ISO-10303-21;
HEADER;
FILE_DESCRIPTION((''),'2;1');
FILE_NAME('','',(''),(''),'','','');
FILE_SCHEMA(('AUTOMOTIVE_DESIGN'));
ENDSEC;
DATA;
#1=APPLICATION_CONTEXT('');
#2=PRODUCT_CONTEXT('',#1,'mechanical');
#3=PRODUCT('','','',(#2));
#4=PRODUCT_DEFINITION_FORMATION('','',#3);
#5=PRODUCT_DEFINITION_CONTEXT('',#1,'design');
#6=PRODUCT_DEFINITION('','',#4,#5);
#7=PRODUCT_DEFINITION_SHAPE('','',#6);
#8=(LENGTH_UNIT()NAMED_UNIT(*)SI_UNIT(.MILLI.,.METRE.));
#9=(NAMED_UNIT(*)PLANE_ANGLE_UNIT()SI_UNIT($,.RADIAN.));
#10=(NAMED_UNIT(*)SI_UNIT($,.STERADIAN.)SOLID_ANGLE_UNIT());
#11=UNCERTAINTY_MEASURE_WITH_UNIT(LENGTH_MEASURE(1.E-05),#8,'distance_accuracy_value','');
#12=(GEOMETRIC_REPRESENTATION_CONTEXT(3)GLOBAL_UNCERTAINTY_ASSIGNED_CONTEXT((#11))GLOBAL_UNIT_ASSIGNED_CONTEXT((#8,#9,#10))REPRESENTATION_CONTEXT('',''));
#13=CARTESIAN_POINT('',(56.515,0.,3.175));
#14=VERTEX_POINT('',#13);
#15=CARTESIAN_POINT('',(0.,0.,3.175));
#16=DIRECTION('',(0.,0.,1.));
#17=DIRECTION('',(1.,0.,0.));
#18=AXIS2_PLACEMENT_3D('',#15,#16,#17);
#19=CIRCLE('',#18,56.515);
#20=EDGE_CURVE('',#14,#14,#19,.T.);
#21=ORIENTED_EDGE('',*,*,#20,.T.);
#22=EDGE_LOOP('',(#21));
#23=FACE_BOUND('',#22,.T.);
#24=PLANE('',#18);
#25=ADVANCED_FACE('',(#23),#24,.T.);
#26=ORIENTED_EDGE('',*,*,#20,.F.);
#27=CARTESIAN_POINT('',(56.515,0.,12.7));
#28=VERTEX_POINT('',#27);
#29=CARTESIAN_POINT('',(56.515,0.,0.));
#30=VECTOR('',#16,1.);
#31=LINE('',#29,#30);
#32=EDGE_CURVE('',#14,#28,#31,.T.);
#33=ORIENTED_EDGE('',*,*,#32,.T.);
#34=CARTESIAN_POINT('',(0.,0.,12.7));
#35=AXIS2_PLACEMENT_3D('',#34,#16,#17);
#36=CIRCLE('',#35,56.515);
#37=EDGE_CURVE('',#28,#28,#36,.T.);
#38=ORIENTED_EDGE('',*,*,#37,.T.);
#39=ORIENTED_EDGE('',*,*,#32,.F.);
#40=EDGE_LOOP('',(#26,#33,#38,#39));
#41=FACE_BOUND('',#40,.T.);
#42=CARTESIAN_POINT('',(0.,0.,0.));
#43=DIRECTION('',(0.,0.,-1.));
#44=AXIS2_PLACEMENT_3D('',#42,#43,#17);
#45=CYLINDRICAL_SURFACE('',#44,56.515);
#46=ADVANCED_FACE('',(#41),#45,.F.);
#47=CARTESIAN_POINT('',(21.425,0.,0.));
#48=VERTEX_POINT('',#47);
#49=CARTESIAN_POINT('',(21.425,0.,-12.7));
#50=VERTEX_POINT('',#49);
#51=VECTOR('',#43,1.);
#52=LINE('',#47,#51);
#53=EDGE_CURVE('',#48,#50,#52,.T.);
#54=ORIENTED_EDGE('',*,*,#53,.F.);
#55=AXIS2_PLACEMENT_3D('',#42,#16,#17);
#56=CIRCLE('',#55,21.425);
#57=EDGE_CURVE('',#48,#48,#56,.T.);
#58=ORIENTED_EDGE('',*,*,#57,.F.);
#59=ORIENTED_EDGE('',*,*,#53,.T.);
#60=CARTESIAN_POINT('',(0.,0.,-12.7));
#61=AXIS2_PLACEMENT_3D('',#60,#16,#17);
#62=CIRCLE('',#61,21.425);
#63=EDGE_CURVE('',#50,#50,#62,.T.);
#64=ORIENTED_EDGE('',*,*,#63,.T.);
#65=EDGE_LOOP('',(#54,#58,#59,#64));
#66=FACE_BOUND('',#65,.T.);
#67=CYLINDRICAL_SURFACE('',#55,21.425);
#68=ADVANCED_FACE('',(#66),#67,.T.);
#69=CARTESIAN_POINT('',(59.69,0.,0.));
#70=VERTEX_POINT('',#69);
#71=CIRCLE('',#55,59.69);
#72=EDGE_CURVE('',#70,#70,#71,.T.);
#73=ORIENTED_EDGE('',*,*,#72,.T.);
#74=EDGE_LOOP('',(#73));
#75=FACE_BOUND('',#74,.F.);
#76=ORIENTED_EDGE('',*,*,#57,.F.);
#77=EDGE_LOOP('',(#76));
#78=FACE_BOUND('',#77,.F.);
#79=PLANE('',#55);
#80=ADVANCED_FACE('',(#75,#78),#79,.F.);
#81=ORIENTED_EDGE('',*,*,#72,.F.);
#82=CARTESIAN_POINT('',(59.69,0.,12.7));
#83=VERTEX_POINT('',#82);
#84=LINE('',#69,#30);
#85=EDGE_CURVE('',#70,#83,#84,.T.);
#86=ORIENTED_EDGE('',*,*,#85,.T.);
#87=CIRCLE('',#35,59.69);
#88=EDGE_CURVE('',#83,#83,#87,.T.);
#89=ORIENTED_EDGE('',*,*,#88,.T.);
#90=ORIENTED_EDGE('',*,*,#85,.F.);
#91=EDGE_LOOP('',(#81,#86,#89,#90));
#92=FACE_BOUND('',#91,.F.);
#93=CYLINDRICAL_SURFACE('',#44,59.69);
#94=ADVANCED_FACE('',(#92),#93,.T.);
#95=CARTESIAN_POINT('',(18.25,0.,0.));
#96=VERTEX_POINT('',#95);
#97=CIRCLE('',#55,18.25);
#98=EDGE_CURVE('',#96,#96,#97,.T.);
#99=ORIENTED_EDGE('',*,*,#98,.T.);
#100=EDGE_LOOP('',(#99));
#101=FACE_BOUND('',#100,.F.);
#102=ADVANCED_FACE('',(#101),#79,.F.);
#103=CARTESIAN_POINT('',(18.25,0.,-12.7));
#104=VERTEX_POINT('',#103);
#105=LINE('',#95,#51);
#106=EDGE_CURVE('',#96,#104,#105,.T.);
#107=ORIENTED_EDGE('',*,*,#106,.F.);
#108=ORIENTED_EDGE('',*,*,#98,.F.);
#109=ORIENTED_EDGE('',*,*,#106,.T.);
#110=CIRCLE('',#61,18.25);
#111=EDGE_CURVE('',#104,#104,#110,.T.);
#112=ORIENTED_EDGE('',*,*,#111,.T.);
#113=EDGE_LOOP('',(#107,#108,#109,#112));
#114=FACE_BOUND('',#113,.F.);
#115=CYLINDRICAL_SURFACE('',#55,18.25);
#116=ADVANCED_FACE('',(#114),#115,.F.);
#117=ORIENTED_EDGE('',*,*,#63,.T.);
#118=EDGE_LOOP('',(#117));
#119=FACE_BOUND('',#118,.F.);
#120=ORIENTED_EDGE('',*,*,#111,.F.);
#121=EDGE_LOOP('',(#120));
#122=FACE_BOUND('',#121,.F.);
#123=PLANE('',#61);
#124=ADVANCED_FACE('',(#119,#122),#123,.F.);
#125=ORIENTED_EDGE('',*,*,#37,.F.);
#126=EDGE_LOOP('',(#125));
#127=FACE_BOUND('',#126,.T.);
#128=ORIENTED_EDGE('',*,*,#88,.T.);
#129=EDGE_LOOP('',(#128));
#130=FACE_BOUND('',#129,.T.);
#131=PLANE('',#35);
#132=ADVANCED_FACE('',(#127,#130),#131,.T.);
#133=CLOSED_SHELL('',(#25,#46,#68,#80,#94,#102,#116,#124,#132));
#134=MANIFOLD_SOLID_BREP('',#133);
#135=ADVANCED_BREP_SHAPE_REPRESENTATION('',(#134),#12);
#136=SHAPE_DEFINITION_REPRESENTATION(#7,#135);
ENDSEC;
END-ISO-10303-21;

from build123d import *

# Parameters (mm, degrees)
F0_R     = 59.69
F0_R_2   = 56.515
F1_DEPTH = 12.7
F2_DEPTH = 3.175
F3_R     = 21.425
F3_R_2   = 18.25
F4_DEPTH = 12.7


# Not quite as in the source:
# - a feature names something its author has since deleted; it is built from what else it names


with BuildPart() as f1:
    # F0 (on Top) → F1 (new body)
    with BuildSketch(Plane.XY):
        Circle(F0_R)
        Circle(F0_R_2, mode=Mode.SUBTRACT)
    extrude(amount=F1_DEPTH)

    # F0 (on Top) → F2 (join)
    with BuildSketch(Plane.XY):
        Circle(F0_R_2)
    extrude(amount=F2_DEPTH)

    # F3 (on face) → F4 (join)
    with BuildSketch(Plane.XY):
        Circle(F3_R)
        Circle(F3_R_2, mode=Mode.SUBTRACT)
    extrude(amount=-F4_DEPTH)


solid = f1.part
